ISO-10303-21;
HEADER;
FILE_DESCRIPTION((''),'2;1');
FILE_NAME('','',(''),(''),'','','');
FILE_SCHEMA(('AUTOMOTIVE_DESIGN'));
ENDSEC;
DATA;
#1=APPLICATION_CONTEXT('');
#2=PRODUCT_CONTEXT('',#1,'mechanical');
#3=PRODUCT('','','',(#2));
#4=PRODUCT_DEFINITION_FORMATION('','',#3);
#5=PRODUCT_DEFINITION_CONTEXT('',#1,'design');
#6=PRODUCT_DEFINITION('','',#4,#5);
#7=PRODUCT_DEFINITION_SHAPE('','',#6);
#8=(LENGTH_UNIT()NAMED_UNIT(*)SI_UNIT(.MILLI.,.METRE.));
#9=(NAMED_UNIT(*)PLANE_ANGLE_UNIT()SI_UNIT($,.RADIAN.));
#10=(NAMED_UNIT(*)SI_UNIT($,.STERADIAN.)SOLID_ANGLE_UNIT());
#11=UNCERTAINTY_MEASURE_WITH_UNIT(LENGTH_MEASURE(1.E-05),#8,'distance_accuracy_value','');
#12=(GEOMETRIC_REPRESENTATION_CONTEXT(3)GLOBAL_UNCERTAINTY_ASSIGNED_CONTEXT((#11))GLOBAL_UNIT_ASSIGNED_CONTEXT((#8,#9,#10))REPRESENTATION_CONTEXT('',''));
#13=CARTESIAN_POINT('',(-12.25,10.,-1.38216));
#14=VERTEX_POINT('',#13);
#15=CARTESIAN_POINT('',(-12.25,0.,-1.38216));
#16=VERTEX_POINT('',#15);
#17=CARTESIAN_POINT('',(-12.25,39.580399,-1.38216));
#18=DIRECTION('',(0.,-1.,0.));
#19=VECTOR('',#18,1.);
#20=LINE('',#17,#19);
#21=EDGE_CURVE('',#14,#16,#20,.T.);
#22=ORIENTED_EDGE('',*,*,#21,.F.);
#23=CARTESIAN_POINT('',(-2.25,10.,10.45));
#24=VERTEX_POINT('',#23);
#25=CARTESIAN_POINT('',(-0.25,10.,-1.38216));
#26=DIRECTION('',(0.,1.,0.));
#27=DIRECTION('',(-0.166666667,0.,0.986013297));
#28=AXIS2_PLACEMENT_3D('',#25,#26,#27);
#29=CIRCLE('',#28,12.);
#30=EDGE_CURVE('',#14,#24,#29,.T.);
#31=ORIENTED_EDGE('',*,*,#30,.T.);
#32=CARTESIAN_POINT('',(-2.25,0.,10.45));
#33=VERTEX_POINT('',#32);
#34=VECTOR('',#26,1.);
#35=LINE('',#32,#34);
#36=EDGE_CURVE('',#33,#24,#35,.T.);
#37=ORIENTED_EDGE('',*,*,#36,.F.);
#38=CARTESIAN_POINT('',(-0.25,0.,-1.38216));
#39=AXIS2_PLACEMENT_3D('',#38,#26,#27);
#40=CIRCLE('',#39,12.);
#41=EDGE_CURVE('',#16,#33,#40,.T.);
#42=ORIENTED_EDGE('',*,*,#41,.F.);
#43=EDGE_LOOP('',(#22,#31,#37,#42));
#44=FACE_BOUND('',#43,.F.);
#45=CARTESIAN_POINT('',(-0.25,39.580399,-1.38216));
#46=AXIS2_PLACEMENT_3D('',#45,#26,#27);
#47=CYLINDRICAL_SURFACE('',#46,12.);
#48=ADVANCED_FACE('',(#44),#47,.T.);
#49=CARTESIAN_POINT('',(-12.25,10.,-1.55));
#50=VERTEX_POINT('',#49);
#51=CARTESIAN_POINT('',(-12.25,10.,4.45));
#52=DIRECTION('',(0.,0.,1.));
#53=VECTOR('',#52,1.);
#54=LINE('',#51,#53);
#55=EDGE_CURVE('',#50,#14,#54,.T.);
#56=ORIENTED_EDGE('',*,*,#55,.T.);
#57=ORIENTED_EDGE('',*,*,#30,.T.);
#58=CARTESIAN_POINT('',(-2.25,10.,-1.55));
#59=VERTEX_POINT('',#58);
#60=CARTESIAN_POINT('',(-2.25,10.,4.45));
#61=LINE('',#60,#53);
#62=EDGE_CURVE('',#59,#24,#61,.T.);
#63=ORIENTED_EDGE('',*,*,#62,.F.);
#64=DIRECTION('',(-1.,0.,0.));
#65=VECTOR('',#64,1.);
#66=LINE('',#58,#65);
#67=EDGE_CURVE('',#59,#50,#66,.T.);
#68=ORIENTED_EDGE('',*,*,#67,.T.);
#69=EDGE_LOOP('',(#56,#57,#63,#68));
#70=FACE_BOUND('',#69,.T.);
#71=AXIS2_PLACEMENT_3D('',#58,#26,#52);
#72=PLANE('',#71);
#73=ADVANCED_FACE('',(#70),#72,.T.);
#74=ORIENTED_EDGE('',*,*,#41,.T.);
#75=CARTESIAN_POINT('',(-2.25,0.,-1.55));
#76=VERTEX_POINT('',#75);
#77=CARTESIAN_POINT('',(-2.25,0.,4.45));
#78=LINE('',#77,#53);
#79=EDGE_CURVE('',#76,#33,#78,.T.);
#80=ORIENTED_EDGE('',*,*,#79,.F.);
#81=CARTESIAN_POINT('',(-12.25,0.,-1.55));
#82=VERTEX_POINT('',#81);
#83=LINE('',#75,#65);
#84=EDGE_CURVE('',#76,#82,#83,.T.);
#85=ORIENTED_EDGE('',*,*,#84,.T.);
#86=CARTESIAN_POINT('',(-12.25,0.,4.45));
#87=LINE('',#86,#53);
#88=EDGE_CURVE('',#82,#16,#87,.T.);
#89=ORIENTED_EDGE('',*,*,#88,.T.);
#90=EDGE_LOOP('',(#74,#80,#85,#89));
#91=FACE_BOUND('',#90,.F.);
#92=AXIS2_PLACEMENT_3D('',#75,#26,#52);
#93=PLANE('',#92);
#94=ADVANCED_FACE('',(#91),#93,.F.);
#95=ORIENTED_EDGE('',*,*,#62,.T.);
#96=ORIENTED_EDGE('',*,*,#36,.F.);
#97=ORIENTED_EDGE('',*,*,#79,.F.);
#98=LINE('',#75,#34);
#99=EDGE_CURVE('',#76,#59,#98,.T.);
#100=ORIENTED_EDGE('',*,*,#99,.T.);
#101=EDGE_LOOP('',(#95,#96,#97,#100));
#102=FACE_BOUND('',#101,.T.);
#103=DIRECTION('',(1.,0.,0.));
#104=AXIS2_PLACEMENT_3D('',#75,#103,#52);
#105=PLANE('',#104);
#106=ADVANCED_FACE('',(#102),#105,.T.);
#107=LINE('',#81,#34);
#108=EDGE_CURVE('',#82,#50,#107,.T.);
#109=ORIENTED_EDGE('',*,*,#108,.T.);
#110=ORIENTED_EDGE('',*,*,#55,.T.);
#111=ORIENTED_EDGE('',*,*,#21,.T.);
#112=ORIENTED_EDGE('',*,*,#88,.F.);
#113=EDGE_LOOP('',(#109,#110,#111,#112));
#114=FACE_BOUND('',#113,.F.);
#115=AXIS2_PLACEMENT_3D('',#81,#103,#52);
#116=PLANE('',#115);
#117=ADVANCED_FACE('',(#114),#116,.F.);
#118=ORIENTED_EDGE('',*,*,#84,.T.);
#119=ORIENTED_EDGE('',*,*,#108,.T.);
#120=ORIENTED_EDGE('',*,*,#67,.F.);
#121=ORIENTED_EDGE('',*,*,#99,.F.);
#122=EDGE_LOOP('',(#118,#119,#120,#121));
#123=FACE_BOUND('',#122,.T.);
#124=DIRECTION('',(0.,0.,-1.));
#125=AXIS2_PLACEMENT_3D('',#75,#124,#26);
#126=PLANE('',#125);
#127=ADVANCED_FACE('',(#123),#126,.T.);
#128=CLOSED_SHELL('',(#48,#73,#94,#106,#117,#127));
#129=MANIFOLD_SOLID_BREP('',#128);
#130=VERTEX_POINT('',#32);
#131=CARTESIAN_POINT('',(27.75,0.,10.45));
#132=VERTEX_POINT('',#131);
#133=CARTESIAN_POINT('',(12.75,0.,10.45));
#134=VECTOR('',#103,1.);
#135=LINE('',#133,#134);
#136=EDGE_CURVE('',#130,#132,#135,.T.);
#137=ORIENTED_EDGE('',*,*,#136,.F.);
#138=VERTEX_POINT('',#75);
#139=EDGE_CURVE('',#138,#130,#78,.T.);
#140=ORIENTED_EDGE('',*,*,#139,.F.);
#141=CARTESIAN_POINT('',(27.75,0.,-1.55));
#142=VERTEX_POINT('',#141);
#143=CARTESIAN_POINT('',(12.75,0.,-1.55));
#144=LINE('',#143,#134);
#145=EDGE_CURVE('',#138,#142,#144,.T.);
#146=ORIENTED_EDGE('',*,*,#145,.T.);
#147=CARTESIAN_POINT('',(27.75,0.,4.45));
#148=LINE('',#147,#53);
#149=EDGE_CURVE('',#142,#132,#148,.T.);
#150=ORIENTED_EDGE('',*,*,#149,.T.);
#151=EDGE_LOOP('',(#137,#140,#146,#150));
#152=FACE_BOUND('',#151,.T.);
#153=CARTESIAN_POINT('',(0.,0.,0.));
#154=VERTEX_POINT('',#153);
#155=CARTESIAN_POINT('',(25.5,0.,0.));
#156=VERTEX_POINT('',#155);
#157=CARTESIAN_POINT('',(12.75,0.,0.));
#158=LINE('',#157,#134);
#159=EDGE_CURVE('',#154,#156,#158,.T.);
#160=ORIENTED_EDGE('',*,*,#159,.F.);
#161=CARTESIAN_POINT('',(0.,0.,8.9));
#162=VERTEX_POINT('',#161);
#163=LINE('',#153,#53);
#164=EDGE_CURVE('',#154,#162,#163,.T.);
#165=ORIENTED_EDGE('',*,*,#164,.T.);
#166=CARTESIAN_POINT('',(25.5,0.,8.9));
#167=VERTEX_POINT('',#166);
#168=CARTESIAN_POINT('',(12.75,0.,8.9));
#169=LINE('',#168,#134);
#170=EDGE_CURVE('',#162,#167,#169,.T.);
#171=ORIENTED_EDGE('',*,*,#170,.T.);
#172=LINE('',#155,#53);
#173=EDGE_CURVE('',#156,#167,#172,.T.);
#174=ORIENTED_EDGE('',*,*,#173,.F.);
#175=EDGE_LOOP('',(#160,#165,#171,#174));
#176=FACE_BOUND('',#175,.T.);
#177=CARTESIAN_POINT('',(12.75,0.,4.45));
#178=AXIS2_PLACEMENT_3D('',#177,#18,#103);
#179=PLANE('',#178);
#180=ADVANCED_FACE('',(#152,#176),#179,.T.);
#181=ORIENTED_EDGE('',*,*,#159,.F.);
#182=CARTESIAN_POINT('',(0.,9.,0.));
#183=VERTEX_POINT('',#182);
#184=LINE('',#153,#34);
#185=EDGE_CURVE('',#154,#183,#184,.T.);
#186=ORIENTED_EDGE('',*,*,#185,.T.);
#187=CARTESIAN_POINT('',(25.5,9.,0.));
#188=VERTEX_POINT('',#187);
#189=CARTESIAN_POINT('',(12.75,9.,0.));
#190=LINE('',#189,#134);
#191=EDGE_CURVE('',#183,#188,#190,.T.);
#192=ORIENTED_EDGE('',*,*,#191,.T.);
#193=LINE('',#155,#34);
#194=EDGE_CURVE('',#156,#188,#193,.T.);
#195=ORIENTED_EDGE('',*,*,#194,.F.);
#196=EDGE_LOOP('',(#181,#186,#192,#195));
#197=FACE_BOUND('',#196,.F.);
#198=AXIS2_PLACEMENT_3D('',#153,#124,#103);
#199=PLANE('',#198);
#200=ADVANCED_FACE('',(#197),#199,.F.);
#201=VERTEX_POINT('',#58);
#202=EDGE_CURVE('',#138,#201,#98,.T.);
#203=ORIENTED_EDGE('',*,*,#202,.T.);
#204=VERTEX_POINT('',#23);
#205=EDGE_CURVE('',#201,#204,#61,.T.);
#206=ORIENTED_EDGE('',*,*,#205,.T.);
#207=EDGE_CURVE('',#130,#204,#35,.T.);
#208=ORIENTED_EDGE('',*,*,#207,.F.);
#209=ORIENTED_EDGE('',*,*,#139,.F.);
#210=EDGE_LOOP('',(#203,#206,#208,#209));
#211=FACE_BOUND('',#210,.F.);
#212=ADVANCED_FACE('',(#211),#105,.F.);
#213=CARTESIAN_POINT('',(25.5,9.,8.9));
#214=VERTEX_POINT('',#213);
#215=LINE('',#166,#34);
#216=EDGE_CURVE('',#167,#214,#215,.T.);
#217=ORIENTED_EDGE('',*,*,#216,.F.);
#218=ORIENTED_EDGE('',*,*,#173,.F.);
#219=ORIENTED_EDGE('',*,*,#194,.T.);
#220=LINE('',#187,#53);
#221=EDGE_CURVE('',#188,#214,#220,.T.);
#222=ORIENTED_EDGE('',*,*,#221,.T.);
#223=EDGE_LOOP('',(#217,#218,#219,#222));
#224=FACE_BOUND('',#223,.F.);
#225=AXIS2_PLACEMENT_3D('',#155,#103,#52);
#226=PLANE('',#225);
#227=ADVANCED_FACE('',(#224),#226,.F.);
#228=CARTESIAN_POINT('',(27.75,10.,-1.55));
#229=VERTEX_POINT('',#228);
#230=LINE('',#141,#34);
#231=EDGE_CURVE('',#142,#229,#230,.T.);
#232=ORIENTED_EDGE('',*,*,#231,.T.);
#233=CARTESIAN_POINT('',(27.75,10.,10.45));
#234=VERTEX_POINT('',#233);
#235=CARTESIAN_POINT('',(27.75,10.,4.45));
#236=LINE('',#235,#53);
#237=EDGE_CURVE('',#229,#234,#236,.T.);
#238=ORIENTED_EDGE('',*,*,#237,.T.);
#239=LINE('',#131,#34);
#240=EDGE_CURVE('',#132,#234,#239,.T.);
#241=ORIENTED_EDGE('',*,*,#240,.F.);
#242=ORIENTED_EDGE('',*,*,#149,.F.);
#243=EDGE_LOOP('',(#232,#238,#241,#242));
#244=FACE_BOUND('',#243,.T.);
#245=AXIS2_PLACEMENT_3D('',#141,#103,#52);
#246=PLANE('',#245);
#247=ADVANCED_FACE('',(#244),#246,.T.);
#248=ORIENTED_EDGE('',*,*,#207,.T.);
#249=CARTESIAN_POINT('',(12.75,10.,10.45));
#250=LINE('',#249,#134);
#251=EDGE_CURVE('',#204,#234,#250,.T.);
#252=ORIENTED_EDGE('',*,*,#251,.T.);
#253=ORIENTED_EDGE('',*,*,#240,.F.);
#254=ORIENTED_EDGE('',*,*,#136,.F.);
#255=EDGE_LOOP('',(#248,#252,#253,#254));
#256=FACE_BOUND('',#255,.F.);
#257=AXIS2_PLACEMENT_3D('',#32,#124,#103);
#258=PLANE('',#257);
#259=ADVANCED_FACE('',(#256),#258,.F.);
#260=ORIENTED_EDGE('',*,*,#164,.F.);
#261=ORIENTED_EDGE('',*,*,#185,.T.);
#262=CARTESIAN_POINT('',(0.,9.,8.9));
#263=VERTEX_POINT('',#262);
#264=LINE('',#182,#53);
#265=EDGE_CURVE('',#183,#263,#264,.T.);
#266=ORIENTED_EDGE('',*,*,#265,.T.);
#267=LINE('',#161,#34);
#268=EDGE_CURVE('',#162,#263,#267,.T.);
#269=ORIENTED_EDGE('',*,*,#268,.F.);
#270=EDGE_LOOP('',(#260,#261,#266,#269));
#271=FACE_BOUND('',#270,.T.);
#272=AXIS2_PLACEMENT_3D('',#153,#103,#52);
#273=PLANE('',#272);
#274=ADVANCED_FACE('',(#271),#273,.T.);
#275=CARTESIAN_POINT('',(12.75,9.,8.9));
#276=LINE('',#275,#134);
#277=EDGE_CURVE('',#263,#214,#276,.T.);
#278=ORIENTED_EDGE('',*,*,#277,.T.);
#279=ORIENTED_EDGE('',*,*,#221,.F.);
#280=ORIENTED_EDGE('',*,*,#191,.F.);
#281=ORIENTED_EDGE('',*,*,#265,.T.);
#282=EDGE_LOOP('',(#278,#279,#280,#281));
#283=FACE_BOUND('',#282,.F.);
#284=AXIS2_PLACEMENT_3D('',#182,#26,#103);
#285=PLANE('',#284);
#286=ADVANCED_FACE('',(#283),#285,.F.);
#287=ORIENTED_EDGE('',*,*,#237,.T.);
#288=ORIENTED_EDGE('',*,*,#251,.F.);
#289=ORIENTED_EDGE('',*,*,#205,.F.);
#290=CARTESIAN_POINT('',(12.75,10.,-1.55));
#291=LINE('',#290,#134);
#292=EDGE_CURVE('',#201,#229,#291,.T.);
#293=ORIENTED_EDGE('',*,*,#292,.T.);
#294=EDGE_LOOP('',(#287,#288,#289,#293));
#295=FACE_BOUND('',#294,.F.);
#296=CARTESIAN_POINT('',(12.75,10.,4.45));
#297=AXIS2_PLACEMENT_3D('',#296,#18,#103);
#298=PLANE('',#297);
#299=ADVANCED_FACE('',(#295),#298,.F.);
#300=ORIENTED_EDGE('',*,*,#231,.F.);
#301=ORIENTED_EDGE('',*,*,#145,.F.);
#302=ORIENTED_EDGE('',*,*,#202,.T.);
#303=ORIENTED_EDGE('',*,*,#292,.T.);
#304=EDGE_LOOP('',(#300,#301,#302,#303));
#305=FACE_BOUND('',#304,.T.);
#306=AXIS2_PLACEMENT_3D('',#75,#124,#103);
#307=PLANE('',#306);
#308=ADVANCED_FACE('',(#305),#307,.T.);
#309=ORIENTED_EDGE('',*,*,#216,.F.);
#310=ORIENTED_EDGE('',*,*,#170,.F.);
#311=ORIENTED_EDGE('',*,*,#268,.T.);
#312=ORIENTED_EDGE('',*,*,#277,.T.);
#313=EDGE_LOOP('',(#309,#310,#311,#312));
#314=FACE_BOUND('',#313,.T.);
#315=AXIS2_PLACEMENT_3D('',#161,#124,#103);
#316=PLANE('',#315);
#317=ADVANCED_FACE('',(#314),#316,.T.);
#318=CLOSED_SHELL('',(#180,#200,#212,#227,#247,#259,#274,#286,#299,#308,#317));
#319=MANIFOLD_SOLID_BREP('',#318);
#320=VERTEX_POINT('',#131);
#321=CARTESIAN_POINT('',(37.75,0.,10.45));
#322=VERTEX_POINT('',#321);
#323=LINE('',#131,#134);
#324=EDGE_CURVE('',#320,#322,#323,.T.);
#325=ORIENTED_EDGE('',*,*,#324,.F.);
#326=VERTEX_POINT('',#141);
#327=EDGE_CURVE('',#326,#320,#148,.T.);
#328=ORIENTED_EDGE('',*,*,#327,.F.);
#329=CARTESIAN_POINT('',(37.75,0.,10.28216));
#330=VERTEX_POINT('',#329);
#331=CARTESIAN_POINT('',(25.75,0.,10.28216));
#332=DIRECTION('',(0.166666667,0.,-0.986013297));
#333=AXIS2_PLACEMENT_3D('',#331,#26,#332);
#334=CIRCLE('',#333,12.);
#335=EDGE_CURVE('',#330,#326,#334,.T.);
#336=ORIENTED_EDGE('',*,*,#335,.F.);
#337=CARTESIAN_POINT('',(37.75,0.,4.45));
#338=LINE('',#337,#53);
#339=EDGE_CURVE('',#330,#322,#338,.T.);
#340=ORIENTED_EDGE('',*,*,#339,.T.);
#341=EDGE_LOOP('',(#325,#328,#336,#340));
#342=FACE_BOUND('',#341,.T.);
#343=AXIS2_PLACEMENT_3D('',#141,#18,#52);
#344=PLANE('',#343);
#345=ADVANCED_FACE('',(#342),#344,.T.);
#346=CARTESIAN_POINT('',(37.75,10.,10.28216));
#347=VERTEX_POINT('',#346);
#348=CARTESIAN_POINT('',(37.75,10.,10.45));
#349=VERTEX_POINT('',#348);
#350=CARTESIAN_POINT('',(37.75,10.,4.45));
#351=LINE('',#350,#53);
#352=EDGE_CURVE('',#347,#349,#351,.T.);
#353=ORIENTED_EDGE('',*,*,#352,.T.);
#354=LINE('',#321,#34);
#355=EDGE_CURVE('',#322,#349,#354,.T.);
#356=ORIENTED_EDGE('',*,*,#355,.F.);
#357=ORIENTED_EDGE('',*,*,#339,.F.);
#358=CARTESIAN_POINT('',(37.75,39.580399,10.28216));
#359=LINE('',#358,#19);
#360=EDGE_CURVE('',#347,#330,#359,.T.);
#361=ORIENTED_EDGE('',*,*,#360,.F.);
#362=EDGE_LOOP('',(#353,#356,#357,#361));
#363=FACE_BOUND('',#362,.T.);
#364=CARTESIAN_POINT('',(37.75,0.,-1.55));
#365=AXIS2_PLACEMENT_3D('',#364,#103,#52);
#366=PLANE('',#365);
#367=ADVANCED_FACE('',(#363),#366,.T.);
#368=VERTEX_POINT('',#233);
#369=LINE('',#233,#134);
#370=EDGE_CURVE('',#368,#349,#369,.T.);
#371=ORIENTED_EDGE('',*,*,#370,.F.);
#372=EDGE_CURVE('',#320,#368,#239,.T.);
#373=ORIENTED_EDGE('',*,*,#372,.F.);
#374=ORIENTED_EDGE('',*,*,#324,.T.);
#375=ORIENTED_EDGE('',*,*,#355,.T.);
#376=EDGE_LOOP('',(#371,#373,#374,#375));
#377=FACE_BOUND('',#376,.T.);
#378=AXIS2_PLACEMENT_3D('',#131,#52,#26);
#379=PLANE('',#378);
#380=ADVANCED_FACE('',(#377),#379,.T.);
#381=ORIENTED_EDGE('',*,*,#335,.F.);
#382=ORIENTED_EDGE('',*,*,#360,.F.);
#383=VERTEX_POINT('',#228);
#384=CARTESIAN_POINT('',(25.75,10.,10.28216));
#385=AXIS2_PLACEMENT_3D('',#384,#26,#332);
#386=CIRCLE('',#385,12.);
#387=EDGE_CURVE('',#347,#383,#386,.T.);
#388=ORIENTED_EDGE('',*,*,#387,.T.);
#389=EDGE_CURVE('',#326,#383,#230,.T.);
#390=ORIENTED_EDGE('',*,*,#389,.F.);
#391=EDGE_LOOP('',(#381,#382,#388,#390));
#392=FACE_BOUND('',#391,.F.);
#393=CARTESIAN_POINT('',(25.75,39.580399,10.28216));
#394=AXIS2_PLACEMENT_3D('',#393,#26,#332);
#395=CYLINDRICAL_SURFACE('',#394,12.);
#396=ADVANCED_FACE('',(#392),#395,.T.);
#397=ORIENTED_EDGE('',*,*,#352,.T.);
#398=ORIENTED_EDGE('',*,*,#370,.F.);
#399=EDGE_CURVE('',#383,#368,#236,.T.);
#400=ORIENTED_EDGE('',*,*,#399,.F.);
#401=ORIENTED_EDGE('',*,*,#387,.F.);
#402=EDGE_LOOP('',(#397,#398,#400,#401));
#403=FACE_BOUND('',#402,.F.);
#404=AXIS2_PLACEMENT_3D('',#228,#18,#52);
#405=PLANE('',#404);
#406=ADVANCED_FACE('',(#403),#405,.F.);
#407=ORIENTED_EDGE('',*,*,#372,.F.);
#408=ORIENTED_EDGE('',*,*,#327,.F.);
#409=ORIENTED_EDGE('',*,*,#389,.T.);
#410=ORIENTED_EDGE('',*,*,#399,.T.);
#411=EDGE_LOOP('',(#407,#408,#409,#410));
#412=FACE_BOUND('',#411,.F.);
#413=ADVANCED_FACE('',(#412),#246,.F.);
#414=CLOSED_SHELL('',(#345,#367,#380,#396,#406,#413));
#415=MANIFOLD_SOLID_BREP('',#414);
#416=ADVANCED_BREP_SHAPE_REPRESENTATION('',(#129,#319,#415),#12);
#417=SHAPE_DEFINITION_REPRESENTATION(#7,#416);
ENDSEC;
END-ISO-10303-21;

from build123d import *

# Parameters (mm, degrees)
F0_W          = 25.5
F0_H          = 8.9
F1_DEPTH      = 8.9
F2_W          = 30
F2_H          = 12
F2_W_2        = 25.5
F2_H_2        = 8.9
F3_DEPTH      = 10
F4_DEPTH      = 9
F5_DEPTH      = 10
F6_DEPTH      = 10
F9_T1_DEPTH   = 69.160797831
F9_2_T1_DEPTH = 69.160797831


# Not quite as in the source:
# - a fillet or chamfer that OpenCascade refuses, or shapes differently, is made with other operations: its cross-section is extruded or revolved along the edge and cut away or added


with BuildPart() as f1:
    # F0 (on Top) → F1 (new body)
    with BuildSketch(Plane.XY):
        with Locations((12.75, 4.45)):
            Rectangle(F0_W, F0_H)
    extrude(amount=F1_DEPTH)


with BuildPart() as f3:
    # F2 (on face) → F3 (new body)
    with BuildSketch(Plane.XZ):
        with Locations((12.75, 4.45)):
            Rectangle(F2_W, F2_H)
        with Locations((12.75, 4.45)):
            Rectangle(F2_W_2, F2_H_2, mode=Mode.SUBTRACT)
        with Locations((12.75, 4.45)):
            Rectangle(F2_W_2, F2_H_2)
    extrude(amount=-F3_DEPTH)


with BuildPart() as f4_tool:
    # F4 (cut): a face of the model
    f4_faces = [f1.part.faces().sort_by_distance(p)[0] for p in [
        (12.75, 0, 4.45),
    ]]
    extrude(f4_faces, amount=-F4_DEPTH)


with BuildPart() as f1_1:
    add(f1.part)

    # F4: cut by f4_tool
    add(f4_tool.part, mode=Mode.SUBTRACT)


with BuildPart() as f3_1:
    add(f3.part)

    # F4: cut by f4_tool
    add(f4_tool.part, mode=Mode.SUBTRACT)


with BuildPart() as f5:
    # F5 (new): a face of the model
    f5_faces = [f3_1.part.faces().sort_by_distance(p)[0] for p in [
        (-2.25, 5, 4.45),
    ]]
    extrude(f5_faces, amount=F5_DEPTH)

    # F9: fillet of radius 12 on 1 edges, made by hand

    # F9_s2 → F9_t1 (cut)
    with BuildSketch(Plane.XZ.offset(-39.5803989155)):
        with BuildLine():
            ThreePointArc((-2.25, 10.45), (-9.4151513899, 6.3638071262), (-12.25, -1.3821595662))
            Line((-12.25, -1.3821595662), (-12.25, 10.45))
            Line((-12.25, 10.45), (-2.25, 10.45))
        make_face()
    extrude(amount=F9_T1_DEPTH, mode=Mode.SUBTRACT)


with BuildPart() as f6:
    # F6 (new): a face of the model
    f6_faces = [f3_1.part.faces().sort_by_distance(p)[0] for p in [
        (27.75, 5, 4.45),
    ]]
    extrude(f6_faces, amount=F6_DEPTH)

    # F9#2: fillet of radius 12 on 1 edges, made by hand

    # F9_2_s2 → F9_2_t1 (cut)
    with BuildSketch(Plane.XZ.offset(-39.5803989155)):
        with BuildLine():
            ThreePointArc((27.75, -1.55), (34.9151513899, 2.5361928738), (37.75, 10.2821595662))
            Line((37.75, 10.2821595662), (37.75, -1.55))
            Line((37.75, -1.55), (27.75, -1.55))
        make_face()
    extrude(amount=F9_2_T1_DEPTH, mode=Mode.SUBTRACT)


solid = Compound([f3_1.part, f5.part, f6.part])
